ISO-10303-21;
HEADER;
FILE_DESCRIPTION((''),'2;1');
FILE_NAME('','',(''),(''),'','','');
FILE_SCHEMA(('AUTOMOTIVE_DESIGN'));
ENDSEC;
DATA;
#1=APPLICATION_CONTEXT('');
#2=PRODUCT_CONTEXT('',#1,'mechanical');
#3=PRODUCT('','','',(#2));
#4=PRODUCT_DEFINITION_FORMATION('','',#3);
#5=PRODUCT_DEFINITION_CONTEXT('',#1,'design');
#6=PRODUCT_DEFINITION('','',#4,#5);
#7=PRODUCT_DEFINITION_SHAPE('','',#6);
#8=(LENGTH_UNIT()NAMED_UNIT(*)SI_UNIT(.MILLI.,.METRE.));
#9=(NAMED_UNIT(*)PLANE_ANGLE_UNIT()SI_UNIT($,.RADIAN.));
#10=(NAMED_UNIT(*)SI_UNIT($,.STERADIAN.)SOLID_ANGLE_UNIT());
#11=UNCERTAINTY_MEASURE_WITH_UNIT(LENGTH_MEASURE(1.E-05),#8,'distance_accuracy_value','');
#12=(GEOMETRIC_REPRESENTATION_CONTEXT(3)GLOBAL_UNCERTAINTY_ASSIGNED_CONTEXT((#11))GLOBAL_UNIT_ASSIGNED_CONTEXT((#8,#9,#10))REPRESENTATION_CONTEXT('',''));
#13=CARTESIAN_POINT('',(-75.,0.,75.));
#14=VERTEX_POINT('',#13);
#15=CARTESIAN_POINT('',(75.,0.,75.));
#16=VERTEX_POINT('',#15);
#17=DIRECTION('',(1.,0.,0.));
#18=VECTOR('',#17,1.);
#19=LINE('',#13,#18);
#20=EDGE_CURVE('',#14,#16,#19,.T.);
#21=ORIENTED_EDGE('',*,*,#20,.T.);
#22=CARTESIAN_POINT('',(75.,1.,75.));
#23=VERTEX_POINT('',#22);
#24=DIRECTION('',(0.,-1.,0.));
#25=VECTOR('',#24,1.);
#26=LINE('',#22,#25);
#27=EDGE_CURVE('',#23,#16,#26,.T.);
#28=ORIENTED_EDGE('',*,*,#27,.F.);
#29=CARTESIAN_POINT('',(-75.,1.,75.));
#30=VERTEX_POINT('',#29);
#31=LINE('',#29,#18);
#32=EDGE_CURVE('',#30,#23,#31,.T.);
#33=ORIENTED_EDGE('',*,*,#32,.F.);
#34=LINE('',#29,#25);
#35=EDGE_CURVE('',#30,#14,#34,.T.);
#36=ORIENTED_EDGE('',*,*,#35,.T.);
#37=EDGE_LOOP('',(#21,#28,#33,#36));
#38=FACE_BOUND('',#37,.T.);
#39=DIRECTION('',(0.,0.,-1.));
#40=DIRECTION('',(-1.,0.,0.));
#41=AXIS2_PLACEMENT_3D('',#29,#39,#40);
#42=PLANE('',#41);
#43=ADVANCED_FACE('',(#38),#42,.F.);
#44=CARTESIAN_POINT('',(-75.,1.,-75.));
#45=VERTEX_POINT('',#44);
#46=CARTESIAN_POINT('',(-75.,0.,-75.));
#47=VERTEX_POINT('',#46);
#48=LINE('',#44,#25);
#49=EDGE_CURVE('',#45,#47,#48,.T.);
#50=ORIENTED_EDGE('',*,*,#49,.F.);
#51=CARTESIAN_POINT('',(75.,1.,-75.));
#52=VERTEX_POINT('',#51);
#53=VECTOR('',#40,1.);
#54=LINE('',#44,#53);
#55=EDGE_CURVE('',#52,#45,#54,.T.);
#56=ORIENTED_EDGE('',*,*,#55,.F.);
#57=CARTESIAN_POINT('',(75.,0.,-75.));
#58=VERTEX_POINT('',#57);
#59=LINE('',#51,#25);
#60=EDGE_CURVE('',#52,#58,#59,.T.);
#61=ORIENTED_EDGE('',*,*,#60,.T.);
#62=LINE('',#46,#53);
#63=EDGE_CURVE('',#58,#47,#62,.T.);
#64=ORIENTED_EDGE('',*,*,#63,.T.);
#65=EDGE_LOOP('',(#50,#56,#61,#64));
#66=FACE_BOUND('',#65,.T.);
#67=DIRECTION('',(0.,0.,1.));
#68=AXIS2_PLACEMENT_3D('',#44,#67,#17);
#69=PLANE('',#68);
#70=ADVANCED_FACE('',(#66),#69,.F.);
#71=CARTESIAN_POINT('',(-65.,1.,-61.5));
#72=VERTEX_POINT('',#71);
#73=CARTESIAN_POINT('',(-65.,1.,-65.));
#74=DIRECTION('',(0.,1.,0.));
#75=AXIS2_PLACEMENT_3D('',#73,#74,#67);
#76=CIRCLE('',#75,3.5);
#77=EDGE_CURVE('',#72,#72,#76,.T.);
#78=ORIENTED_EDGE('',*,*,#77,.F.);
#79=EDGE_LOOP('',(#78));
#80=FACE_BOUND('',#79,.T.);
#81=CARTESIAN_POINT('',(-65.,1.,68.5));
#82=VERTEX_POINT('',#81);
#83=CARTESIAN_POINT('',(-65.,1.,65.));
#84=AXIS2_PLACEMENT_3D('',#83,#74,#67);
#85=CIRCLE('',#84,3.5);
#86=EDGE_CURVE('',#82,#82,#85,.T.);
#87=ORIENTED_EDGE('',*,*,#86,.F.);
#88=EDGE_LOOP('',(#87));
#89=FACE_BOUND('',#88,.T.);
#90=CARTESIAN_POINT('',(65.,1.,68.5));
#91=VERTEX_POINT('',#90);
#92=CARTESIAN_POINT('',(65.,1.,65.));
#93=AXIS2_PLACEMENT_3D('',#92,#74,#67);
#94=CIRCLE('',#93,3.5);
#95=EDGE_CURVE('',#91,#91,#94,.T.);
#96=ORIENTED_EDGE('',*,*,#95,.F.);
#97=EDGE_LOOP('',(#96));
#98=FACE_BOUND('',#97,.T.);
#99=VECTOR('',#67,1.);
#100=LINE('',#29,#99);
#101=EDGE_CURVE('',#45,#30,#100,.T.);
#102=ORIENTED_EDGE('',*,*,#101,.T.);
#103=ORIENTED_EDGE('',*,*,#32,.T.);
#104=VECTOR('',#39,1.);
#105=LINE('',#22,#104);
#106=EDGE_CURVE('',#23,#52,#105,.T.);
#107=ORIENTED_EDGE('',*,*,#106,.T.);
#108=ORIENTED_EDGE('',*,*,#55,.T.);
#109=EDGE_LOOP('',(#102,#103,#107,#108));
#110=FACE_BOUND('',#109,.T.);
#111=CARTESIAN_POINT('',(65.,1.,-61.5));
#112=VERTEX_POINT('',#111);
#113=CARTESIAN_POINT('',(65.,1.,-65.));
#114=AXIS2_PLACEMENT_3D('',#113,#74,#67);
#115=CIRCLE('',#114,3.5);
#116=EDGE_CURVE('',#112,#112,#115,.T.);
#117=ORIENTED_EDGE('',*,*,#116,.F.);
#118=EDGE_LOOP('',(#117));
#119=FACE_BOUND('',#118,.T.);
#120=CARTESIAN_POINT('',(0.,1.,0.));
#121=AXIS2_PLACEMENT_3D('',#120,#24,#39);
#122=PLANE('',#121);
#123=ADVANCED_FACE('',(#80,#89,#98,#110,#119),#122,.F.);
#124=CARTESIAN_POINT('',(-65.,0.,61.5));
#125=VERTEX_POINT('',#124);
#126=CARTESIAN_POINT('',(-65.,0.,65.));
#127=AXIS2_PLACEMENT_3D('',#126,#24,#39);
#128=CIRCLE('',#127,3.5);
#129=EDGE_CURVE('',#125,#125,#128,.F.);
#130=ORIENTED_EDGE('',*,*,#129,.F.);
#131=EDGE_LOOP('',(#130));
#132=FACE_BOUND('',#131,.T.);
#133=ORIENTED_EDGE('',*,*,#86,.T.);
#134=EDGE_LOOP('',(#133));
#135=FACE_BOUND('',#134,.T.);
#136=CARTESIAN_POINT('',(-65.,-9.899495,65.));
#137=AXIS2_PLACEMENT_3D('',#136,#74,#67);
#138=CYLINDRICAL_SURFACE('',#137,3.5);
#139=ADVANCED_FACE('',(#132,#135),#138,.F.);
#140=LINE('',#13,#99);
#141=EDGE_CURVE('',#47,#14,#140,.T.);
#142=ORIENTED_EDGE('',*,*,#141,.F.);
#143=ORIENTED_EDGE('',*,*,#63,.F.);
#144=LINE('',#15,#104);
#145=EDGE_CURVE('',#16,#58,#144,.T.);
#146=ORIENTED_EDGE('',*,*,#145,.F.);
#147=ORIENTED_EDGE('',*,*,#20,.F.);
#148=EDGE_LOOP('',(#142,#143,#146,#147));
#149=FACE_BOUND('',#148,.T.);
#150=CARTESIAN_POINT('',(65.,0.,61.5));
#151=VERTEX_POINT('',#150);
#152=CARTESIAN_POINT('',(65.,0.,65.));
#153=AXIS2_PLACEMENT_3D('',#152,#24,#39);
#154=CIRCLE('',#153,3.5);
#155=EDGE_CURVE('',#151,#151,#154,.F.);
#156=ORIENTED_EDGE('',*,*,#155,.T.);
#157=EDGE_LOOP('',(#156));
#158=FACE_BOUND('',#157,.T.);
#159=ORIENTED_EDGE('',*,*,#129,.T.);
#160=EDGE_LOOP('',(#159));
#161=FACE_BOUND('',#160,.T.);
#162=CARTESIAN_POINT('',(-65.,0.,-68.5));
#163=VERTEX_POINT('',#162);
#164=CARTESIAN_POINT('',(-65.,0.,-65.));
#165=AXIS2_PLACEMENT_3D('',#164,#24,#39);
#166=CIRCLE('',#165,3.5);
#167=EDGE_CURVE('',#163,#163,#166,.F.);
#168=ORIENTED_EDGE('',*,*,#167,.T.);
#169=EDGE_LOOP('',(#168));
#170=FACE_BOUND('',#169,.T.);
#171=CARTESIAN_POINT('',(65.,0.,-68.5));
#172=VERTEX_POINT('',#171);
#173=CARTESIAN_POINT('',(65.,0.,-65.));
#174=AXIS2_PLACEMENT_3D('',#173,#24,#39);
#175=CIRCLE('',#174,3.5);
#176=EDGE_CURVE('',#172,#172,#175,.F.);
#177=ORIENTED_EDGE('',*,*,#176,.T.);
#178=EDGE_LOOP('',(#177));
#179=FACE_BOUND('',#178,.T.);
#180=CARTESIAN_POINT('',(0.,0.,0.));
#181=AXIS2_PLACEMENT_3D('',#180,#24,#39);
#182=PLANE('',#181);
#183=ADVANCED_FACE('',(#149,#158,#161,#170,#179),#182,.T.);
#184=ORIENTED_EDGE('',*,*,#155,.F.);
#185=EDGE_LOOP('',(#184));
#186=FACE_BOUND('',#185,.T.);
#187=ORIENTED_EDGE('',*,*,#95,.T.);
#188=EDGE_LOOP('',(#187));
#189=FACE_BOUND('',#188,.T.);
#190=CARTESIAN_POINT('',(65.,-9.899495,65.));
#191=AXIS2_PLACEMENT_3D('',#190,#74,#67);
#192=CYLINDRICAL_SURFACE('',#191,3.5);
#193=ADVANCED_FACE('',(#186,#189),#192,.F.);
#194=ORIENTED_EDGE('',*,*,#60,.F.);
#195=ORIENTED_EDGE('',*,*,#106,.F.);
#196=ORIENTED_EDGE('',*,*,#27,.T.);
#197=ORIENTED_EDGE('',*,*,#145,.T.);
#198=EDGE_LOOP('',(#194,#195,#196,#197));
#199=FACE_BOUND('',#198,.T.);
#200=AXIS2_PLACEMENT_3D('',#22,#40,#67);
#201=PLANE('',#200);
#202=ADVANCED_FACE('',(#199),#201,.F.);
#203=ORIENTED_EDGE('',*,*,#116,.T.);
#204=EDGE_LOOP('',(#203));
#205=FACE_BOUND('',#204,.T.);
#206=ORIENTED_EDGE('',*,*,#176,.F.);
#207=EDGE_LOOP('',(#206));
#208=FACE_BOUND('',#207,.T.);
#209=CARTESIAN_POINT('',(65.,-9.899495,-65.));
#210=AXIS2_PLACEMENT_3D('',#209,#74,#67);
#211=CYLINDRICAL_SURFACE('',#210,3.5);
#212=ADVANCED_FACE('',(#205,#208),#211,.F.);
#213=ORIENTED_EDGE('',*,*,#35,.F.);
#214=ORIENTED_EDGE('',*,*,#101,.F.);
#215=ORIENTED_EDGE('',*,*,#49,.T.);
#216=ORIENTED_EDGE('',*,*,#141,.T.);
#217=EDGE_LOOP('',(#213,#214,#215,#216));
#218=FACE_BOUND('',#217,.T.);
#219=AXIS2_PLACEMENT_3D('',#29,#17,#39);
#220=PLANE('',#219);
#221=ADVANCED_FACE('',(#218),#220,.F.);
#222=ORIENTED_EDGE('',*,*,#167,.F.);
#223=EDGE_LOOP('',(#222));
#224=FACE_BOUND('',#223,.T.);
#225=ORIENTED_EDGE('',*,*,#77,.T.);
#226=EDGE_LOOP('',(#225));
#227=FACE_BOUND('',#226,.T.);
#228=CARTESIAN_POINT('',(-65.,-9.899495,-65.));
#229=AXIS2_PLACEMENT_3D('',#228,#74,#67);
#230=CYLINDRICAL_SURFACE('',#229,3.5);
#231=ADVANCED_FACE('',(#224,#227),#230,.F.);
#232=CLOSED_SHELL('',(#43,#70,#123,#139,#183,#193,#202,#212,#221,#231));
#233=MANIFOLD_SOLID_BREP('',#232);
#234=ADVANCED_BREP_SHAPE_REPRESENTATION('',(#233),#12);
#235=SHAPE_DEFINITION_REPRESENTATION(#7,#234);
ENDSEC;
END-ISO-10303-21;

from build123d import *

# Parameters (mm, degrees)
SKETCH1_W          = 150
SKETCH1_H          = 150
BASE_FLANGE1_DEPTH = 1
SKETCH6_R          = 3.5
CUT_EXTRUDE1_DEPTH = 1


# Sheet-metal steps are written as plain solids
with BuildPart() as part:
    # Sketch1 → Base-Flange1 (new body)
    with BuildSketch(Plane(origin=(0, 0, 0), x_dir=(1, 0, 0), z_dir=(0, 1, 0))):
        Rectangle(SKETCH1_W, SKETCH1_H)
    extrude(amount=BASE_FLANGE1_DEPTH)

    # Sketch6 → Cut-Extrude1 (cut)
    with BuildSketch(Plane(origin=(0, 1, 0), x_dir=(1, 0, 0), z_dir=(0, 1, 0))):
        with Locations(Location((-65, -65, 0), (0, 0, 270))):
            Circle(SKETCH6_R)
        with Locations(Location((-65, 65, 0), (0, 0, 270))):
            Circle(SKETCH6_R)
        with Locations(Location((65, 65, 0), (0, 0, 270))):
            Circle(SKETCH6_R)
        with Locations(Location((65, -65, 0), (0, 0, 270))):
            Circle(SKETCH6_R)
    extrude(amount=-CUT_EXTRUDE1_DEPTH, mode=Mode.SUBTRACT)


solid = part.part
